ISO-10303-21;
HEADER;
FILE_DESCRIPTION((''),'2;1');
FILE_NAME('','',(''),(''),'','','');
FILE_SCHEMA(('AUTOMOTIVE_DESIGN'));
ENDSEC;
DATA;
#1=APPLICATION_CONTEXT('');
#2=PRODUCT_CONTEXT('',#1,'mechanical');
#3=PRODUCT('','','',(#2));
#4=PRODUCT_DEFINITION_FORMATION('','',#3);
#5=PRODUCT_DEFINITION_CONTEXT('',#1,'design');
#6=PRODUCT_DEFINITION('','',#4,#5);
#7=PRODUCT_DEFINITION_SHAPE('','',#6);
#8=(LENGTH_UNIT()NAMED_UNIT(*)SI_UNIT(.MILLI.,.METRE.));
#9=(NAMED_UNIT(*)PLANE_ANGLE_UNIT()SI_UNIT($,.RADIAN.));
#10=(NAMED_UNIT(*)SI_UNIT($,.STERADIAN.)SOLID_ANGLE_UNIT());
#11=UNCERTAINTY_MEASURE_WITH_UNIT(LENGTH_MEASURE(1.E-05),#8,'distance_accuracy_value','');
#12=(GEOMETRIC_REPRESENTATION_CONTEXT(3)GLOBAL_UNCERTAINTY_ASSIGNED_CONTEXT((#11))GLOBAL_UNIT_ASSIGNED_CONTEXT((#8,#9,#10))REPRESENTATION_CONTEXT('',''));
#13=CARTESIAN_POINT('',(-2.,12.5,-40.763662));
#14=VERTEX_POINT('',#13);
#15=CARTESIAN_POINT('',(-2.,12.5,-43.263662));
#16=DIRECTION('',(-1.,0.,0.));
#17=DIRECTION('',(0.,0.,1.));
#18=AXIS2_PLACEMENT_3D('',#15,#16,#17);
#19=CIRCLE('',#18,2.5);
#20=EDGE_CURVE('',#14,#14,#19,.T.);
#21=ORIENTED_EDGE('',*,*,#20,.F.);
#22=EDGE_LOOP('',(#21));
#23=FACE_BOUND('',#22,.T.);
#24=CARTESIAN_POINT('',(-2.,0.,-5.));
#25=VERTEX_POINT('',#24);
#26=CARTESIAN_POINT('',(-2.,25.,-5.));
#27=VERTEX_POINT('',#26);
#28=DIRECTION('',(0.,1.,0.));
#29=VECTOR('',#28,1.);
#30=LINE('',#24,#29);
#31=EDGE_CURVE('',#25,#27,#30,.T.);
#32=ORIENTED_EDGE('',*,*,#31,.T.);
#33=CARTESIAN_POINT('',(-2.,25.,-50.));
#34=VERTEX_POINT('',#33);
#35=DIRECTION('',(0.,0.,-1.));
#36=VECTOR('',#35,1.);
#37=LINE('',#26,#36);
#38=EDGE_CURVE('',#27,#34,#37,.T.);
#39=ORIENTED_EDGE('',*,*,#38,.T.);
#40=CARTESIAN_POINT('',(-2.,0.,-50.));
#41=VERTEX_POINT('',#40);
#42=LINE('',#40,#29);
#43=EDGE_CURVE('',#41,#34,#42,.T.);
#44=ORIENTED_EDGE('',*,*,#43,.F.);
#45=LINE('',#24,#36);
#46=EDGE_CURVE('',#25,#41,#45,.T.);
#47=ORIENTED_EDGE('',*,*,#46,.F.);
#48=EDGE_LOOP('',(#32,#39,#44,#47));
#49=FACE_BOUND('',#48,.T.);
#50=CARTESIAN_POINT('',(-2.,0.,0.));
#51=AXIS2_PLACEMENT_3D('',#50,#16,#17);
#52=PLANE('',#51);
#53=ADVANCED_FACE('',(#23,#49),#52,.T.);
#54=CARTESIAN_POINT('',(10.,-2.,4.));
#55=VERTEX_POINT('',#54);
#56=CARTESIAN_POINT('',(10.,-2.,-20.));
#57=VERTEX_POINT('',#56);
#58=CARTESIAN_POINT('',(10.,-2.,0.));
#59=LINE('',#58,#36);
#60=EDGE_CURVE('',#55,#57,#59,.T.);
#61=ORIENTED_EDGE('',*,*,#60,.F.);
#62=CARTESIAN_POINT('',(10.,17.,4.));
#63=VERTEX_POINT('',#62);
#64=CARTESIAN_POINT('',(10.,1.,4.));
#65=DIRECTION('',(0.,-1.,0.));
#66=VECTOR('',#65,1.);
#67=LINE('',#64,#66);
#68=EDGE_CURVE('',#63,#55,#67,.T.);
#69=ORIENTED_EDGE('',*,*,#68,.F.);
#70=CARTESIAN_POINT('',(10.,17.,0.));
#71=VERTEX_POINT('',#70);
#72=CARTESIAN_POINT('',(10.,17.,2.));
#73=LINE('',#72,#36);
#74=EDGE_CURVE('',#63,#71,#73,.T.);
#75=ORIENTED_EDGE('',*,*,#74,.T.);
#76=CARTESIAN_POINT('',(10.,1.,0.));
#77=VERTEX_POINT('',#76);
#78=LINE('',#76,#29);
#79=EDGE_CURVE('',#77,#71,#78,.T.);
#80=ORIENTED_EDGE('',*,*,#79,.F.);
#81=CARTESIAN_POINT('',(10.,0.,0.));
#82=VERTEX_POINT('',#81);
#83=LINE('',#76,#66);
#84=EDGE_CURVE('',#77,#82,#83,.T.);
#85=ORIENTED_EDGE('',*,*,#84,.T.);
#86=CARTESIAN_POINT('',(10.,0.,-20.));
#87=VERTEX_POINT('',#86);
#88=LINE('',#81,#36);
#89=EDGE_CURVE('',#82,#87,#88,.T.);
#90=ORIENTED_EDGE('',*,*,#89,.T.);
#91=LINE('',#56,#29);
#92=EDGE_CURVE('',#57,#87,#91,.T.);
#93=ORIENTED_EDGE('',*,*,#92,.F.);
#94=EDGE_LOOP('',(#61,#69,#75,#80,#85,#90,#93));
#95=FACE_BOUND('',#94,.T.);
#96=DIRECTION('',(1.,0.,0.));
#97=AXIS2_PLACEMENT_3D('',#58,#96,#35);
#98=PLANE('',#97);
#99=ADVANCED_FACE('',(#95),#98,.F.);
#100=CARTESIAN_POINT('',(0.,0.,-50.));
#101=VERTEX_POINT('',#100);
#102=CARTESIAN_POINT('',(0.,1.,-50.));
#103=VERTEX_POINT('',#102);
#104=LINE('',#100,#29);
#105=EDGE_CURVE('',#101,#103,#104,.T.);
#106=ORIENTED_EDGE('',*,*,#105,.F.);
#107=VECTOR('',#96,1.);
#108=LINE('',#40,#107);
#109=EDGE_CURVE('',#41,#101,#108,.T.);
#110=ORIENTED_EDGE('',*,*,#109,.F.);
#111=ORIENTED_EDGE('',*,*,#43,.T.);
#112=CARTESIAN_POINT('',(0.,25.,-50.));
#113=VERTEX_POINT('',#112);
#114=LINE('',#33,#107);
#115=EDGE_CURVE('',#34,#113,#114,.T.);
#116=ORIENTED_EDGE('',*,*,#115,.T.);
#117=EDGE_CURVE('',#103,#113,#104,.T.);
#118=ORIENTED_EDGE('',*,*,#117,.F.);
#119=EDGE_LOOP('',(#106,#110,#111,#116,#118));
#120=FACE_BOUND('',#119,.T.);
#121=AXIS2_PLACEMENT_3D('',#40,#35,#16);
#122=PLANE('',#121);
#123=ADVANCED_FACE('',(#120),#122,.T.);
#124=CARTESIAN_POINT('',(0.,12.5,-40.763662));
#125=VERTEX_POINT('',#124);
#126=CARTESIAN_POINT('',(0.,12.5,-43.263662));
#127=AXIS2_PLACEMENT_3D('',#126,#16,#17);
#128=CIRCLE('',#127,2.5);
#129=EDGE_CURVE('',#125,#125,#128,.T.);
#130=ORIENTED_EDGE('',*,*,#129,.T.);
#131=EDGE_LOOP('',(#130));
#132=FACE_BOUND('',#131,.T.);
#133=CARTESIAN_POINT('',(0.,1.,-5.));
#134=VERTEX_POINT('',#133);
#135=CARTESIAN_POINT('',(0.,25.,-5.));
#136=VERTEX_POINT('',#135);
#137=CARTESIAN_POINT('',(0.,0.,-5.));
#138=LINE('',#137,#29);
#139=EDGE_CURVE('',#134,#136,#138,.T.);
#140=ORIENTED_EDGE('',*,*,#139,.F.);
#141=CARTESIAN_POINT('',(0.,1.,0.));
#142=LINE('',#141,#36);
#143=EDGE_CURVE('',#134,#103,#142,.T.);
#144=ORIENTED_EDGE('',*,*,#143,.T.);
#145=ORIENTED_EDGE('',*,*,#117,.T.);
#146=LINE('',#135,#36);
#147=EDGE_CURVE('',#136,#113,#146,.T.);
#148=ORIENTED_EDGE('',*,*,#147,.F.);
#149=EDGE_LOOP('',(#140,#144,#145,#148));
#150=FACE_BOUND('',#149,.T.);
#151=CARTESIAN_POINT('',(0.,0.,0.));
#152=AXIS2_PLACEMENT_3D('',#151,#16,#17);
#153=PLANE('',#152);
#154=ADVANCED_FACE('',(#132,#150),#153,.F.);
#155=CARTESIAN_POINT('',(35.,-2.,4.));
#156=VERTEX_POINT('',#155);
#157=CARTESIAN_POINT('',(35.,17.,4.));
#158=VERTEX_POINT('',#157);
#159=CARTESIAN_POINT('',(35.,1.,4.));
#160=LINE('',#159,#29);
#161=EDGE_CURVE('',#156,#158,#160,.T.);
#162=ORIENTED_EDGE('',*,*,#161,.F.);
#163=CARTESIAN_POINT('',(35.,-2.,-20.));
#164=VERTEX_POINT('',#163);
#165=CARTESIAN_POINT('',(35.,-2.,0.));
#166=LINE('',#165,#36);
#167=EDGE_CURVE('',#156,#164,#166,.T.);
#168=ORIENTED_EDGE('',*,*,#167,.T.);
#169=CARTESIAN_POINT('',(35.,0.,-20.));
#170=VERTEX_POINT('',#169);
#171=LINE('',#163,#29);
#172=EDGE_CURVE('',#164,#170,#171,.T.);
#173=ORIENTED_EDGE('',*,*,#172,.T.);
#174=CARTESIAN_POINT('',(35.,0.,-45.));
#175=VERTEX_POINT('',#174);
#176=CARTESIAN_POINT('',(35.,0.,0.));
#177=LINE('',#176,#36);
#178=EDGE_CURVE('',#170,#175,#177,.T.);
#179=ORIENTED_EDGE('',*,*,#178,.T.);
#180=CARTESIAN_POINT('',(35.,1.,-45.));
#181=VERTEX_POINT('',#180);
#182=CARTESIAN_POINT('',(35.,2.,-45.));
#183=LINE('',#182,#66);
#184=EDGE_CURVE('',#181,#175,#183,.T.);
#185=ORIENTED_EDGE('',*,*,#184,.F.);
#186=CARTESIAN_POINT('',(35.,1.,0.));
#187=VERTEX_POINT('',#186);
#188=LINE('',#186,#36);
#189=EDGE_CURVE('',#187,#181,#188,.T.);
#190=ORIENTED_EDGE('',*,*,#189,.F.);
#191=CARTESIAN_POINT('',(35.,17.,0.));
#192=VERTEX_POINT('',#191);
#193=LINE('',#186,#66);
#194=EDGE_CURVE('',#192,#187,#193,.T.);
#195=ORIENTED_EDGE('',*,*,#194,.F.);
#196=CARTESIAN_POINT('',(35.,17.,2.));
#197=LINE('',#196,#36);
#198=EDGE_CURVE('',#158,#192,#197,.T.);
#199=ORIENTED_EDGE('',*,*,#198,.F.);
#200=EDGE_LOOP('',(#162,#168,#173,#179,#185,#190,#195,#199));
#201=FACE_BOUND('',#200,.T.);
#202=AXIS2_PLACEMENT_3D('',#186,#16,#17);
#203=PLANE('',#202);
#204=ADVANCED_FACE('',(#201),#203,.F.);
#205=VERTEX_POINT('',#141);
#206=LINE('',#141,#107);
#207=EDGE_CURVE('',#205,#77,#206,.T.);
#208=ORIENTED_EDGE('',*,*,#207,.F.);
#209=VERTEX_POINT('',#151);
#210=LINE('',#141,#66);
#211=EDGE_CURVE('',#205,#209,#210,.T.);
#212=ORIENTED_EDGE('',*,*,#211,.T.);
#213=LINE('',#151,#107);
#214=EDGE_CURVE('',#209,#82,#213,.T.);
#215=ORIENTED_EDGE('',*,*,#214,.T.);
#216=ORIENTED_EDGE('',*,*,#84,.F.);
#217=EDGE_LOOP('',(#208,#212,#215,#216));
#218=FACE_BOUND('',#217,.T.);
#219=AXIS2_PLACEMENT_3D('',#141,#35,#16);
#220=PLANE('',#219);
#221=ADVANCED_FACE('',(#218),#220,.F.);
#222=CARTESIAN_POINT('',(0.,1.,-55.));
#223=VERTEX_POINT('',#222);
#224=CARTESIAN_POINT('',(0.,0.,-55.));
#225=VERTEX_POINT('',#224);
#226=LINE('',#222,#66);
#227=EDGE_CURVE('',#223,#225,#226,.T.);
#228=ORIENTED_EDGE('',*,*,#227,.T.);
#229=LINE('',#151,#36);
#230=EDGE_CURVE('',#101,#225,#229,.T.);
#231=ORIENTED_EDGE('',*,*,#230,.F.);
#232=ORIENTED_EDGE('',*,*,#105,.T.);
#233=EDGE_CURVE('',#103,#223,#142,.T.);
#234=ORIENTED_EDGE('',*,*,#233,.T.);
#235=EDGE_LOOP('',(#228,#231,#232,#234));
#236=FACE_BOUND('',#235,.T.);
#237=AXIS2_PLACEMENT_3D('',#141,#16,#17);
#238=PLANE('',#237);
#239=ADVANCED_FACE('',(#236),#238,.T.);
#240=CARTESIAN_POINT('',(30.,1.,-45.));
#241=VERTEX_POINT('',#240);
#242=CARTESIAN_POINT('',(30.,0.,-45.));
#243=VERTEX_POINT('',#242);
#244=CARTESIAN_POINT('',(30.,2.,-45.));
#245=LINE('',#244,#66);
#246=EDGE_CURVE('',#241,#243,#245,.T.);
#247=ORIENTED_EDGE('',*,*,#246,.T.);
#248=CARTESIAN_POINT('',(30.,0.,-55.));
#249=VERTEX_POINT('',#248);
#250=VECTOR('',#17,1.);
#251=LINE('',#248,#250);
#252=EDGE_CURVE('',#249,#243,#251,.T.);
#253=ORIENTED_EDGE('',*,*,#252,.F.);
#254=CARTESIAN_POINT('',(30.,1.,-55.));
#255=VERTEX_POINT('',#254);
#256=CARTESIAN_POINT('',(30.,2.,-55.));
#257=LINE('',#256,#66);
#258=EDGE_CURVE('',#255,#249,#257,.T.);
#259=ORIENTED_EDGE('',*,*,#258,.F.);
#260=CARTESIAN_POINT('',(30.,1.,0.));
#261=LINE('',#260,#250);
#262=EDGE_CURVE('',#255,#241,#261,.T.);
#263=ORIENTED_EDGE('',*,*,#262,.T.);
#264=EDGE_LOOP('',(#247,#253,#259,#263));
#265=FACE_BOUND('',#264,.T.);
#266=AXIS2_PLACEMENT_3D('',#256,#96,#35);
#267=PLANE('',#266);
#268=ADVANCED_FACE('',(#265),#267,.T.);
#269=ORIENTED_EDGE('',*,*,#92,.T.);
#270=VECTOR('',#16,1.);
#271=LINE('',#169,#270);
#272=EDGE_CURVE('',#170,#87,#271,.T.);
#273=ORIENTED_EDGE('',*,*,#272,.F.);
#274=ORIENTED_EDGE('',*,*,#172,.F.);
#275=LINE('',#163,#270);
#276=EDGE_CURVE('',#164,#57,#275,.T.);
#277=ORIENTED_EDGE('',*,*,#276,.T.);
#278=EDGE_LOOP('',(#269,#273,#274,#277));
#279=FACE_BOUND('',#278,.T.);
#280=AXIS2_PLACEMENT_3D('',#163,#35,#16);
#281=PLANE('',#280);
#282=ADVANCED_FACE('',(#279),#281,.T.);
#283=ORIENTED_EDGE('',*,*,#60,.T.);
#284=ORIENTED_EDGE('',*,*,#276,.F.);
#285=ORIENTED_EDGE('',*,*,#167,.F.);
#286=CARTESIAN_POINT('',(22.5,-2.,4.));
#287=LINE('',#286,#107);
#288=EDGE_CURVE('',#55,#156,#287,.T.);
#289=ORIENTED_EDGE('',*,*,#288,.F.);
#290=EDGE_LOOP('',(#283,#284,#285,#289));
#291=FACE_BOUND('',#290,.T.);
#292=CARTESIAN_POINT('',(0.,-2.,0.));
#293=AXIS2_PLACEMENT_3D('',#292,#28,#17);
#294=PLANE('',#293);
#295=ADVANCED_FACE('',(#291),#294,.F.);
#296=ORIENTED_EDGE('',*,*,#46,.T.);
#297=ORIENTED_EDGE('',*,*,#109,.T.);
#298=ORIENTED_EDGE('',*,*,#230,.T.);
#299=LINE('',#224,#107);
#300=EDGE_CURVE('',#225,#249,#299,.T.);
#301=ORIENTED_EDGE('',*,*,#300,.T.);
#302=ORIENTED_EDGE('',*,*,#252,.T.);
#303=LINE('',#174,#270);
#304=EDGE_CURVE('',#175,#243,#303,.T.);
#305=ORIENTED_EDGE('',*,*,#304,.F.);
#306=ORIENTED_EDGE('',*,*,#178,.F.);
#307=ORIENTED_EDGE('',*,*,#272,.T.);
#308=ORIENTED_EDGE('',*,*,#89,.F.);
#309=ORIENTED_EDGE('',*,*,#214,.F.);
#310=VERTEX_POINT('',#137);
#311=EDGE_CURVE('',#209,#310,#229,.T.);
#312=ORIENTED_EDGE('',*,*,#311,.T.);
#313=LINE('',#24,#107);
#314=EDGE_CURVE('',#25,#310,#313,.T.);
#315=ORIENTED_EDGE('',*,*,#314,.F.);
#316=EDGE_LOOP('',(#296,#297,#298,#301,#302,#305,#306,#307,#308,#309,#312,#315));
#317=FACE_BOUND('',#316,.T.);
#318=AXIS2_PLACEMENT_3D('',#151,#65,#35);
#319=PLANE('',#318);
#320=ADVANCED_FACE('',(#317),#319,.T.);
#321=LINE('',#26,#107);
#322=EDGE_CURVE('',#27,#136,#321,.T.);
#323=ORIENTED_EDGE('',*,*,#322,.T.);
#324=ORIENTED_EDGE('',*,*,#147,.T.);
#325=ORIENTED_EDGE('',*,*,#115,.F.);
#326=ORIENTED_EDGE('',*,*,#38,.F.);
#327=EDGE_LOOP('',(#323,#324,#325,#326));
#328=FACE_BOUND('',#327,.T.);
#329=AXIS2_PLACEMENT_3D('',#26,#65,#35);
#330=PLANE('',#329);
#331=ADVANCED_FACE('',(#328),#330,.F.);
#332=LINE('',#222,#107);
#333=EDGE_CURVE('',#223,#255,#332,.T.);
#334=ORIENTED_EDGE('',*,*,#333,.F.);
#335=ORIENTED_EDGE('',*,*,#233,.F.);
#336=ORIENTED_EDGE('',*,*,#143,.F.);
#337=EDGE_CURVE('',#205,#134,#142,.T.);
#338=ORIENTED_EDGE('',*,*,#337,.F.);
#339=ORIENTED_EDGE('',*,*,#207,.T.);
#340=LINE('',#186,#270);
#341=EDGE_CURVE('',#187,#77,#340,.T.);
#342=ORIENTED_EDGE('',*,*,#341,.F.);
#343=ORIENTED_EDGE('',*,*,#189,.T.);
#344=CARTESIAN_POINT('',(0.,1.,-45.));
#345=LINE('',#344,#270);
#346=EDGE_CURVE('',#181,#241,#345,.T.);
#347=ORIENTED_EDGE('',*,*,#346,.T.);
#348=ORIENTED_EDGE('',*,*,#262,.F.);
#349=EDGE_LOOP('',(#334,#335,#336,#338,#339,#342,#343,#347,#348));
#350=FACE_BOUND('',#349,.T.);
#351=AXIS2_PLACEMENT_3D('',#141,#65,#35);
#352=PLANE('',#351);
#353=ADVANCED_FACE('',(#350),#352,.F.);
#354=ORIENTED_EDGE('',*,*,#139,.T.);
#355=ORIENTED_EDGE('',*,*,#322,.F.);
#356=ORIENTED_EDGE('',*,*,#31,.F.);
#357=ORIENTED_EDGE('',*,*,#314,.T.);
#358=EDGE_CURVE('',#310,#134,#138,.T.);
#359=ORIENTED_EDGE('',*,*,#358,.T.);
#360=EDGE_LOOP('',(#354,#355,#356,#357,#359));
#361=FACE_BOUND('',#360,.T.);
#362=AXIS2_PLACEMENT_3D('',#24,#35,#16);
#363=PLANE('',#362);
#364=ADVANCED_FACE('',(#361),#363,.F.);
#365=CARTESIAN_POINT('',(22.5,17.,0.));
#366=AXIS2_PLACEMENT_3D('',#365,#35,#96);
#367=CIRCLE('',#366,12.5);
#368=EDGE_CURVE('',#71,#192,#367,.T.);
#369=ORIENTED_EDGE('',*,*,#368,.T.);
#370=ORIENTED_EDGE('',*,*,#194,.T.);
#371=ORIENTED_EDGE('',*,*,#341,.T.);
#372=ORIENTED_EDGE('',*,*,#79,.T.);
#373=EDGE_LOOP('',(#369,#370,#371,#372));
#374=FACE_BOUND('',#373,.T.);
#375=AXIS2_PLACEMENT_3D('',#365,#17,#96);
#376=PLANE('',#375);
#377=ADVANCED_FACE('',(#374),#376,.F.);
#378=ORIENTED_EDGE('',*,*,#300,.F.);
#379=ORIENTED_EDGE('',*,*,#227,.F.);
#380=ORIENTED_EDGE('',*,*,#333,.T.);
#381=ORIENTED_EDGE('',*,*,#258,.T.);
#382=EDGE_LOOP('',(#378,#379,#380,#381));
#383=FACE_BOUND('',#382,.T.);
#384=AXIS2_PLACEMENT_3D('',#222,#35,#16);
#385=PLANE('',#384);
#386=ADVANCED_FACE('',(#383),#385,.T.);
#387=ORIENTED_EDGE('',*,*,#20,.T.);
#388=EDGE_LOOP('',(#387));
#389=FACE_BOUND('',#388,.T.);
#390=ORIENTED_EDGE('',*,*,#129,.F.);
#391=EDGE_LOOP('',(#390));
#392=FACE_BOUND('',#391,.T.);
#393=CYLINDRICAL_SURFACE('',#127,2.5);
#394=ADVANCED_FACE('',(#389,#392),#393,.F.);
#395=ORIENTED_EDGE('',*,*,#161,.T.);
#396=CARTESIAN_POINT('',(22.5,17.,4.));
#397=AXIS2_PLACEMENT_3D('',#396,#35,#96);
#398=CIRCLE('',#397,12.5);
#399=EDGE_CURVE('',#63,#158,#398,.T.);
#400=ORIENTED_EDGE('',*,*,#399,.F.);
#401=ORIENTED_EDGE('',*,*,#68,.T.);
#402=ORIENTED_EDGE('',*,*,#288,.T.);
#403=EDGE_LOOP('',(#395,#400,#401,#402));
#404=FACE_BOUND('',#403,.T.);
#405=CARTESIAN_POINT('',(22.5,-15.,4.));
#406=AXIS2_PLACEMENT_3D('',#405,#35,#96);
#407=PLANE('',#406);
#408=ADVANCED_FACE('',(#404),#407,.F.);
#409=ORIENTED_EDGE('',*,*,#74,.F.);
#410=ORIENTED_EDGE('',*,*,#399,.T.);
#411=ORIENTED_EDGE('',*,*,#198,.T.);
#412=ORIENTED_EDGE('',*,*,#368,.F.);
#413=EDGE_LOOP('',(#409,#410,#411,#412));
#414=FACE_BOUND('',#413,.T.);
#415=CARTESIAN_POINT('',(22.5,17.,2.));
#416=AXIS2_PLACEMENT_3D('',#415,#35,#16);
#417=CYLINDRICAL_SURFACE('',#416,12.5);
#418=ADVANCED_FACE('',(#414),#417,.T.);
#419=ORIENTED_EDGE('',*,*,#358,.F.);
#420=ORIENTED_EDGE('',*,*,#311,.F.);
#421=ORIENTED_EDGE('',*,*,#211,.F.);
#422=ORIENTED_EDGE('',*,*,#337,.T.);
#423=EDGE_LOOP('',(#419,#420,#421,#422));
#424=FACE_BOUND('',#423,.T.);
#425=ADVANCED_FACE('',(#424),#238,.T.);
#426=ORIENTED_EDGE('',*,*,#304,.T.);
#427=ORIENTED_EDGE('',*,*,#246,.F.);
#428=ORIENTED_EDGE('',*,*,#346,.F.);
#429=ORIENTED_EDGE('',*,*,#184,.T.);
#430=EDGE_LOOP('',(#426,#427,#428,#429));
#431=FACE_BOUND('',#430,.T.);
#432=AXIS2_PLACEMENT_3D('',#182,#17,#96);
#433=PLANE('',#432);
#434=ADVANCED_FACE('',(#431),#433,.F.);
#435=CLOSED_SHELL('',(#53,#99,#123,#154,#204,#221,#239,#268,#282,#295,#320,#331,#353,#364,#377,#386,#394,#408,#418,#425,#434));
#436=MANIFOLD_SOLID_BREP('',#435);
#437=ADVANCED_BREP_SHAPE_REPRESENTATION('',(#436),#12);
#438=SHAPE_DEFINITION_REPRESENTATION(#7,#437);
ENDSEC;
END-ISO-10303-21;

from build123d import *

# Parameters (mm, degrees)
ESQUISSE1_W             = 35
ESQUISSE1_H             = 55
BOSS_EXTRU_1_DEPTH      = 1
ESQUISSE2_W             = 45
ESQUISSE2_H             = 25
BOSS_EXTRU_2_DEPTH      = 2
ESQUISSE3_W             = 5
ESQUISSE3_H             = 10
ENL_V_MAT_EXTRU_1_DEPTH = 2
ESQUISSE5_W             = 25
ESQUISSE5_H             = 20
BOSS_EXTRU_3_DEPTH      = 2
BOSS_EXTRU_4_DEPTH      = 2
SYM_TRIE1_DEPTH         = 4
ESQUISSE7_W             = 13.982195968
ESQUISSE7_H             = 28.94332856
ENL_V_MAT_EXTRU_2_DEPTH = 50
ESQUISSE8_R             = 2.5
ENL_V_MAT_EXTRU_3_DEPTH = 2


# Read off the part's stored shape, not the designer's step: Symétrie1
with BuildPart() as part:
    # Esquisse1 → Boss.-Extru.1 (new body)
    with BuildSketch(Plane(origin=(0, 0, 0), x_dir=(1, 0, 0), z_dir=(0, 1, 0))):
        with Locations((17.5, 27.5)):
            Rectangle(ESQUISSE1_W, ESQUISSE1_H)
    extrude(amount=BOSS_EXTRU_1_DEPTH)

    # Esquisse2 → Boss.-Extru.2 (add)
    with BuildSketch(Plane.ZY):
        with Locations((-27.5, 12.5)):
            Rectangle(ESQUISSE2_W, ESQUISSE2_H)
    extrude(amount=BOSS_EXTRU_2_DEPTH)

    # Esquisse3 → Enlèv. mat.-Extru.1 (cut)
    with BuildSketch(Plane(origin=(0, 0, 0), x_dir=(-1, 0, 0), z_dir=(0, -1, 0))):
        with Locations((-32.5, 50)):
            Rectangle(ESQUISSE3_W, ESQUISSE3_H)
    extrude(amount=-ENL_V_MAT_EXTRU_1_DEPTH, mode=Mode.SUBTRACT)

    # Esquisse5 → Boss.-Extru.3 (add)
    with BuildSketch(Plane(origin=(0, 0, 0), x_dir=(-1, 0, 0), z_dir=(0, -1, 0))):
        with Locations((-22.5, 10)):
            Rectangle(ESQUISSE5_W, ESQUISSE5_H)
    extrude(amount=BOSS_EXTRU_3_DEPTH)

    # Esquisse6 → Boss.-Extru.4 (add)
    with BuildSketch(Plane.XY):
        with BuildLine():
            Line((35, 1), (10, 1))
            Line((10, 1), (10, -15))
            ThreePointArc((10, -15), (22.5, -27.5), (35, -15))
            Line((35, -15), (35, 1))
        make_face()
    extrude(amount=BOSS_EXTRU_4_DEPTH)

    # Symétrie1 outline → Symétrie1 (add)
    with BuildSketch(Plane.XY):
        with BuildLine():
            Line((35, -15), (35, 17))
            ThreePointArc((35, 17), (22.5, 29.5), (10, 17))
            Line((10, 17), (10, -15))
            ThreePointArc((10, -15), (22.5, -27.5), (35, -15))
        make_face()
    extrude(amount=SYM_TRIE1_DEPTH)

    # Esquisse7 → Enlèv. mat.-Extru.2 (cut)
    with BuildSketch(Plane.ZY.offset(-10)):
        with Locations((6.991097984, -16.47166428)):
            Rectangle(ESQUISSE7_W, ESQUISSE7_H)
    extrude(amount=-ENL_V_MAT_EXTRU_2_DEPTH, mode=Mode.SUBTRACT)

    # Esquisse8 → Enlèv. mat.-Extru.3 (cut)
    with BuildSketch(Plane.ZY.offset(2)):
        with Locations((-43.263662177, 12.5)):
            Circle(ESQUISSE8_R)
    extrude(amount=-ENL_V_MAT_EXTRU_3_DEPTH, mode=Mode.SUBTRACT)


solid = part.part
